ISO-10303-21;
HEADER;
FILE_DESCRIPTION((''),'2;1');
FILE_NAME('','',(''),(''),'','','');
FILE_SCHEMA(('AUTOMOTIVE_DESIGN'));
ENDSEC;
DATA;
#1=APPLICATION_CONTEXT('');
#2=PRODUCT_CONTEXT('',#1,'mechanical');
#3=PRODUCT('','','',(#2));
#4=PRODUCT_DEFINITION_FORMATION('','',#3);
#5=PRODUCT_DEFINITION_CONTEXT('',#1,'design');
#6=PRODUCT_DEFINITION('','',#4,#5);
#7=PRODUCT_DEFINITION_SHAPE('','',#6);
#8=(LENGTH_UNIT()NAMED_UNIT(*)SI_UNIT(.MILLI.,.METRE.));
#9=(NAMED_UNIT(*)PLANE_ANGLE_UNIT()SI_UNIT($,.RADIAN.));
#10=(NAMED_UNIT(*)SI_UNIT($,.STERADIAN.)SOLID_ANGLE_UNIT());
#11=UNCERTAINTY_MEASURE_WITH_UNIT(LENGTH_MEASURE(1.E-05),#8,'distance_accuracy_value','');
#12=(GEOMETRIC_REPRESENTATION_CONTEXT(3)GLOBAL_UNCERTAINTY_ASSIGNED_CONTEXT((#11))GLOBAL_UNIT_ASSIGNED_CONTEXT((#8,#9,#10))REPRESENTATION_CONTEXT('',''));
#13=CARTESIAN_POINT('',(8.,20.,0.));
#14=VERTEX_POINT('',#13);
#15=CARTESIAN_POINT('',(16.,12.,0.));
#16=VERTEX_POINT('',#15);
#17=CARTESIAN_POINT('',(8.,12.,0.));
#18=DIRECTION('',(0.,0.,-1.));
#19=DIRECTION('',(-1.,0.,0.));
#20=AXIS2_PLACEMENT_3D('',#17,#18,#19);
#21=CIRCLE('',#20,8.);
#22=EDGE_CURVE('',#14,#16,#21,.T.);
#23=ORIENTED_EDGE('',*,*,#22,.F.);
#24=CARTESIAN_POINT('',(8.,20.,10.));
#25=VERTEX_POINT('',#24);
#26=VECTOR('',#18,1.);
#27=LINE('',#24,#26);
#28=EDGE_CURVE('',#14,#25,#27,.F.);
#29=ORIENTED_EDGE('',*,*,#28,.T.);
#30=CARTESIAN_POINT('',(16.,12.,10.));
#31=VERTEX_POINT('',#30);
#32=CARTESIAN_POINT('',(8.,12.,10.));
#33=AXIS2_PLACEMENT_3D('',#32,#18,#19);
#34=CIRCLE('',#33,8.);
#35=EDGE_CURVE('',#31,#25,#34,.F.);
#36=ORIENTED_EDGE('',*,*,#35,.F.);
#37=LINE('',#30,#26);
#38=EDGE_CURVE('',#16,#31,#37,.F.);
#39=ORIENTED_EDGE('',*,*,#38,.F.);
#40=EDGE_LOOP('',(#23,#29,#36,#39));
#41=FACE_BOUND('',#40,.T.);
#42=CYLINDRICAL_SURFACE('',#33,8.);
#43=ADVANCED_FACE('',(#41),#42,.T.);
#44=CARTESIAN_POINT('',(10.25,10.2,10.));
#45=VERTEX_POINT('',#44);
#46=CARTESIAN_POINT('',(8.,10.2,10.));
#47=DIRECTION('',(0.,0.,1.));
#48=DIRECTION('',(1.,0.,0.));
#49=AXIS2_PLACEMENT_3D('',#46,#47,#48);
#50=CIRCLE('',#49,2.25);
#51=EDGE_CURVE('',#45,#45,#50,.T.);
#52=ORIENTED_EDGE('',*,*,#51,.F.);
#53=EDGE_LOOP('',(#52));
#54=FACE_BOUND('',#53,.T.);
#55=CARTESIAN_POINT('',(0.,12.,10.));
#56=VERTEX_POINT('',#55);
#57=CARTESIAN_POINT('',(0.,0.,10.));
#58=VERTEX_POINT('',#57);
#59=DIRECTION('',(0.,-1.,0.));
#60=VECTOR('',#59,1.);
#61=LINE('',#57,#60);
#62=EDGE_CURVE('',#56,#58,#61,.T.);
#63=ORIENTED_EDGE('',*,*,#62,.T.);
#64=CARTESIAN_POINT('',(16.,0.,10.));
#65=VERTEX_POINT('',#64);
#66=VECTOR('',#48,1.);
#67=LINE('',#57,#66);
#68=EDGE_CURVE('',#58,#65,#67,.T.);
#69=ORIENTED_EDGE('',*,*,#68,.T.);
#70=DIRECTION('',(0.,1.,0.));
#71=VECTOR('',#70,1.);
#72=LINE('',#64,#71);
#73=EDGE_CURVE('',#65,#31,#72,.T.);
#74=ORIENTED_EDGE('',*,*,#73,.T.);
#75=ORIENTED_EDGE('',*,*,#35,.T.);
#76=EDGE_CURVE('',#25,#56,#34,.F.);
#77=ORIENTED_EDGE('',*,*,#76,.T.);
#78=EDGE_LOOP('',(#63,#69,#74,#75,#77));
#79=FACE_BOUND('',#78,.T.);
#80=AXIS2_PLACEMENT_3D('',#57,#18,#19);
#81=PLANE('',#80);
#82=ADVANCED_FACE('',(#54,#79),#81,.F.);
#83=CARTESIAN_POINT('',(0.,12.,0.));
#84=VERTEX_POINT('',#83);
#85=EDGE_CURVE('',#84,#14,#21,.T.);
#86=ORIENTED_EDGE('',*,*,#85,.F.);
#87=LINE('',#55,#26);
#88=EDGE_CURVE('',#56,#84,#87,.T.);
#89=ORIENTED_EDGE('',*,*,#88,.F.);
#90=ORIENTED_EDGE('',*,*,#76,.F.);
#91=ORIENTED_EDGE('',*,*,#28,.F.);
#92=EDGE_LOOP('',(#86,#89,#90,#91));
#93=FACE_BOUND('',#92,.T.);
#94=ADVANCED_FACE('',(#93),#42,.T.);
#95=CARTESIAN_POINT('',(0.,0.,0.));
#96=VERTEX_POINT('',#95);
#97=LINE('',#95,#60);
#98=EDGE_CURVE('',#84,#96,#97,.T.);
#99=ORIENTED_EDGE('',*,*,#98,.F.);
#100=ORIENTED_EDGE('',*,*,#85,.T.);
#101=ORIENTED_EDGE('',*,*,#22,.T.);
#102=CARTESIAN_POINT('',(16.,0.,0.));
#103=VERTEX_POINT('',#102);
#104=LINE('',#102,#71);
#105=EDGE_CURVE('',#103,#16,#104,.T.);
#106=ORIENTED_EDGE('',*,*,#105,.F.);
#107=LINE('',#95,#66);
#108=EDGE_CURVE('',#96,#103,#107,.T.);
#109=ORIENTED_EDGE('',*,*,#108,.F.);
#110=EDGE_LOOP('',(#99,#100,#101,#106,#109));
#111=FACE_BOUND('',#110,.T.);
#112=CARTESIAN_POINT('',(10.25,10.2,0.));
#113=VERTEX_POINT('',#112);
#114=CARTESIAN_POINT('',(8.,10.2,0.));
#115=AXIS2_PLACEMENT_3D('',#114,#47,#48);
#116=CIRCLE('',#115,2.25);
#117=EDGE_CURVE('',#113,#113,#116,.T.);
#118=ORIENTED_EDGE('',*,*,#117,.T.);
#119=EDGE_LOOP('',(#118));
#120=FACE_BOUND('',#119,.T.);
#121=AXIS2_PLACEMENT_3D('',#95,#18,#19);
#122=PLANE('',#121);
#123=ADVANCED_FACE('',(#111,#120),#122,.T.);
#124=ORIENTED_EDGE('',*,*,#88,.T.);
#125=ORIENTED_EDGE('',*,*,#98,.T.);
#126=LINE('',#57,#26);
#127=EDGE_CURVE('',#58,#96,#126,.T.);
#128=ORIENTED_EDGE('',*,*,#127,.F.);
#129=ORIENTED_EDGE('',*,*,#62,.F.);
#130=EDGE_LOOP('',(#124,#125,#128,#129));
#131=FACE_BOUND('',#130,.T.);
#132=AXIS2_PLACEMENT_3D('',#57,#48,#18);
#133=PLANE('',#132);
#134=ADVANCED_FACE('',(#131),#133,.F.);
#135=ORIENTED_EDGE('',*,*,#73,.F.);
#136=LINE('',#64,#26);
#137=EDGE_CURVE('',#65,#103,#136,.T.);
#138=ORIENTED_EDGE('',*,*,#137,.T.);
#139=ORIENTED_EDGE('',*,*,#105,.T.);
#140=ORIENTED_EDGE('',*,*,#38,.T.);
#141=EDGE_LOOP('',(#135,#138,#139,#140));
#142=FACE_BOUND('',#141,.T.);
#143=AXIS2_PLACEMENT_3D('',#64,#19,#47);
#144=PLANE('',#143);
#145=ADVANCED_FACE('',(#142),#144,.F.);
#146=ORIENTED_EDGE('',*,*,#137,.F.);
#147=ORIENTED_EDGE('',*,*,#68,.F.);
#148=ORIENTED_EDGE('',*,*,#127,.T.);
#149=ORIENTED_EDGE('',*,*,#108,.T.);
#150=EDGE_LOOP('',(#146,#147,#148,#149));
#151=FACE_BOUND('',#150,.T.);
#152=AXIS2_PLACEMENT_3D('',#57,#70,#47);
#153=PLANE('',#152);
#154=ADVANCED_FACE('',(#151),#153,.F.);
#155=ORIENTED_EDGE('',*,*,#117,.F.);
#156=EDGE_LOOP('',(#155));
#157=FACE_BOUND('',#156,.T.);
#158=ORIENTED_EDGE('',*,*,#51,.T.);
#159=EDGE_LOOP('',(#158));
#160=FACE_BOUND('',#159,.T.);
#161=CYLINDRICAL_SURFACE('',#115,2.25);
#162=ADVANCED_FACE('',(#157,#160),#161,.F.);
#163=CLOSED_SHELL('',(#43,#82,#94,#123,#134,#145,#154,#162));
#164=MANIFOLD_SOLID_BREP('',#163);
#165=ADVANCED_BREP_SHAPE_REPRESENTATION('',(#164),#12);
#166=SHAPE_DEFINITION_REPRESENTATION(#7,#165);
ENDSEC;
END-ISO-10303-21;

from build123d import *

# Parameters (mm, degrees)
SKETCH1_W           = 16
SKETCH1_H           = 20
BOSS_EXTRUDE1_DEPTH = 10
SKETCH2_R           = 2.25
CUT_EXTRUDE1_DEPTH  = 28.49545417
FILLET1_R           = 8


with BuildPart() as part:
    # Sketch1 → Boss-Extrude1 (new body)
    with BuildSketch(Plane.XY):
        with Locations((8, 10)):
            Rectangle(SKETCH1_W, SKETCH1_H)
    extrude(amount=BOSS_EXTRUDE1_DEPTH)

    # Sketch2 → Cut-Extrude1 (cut, through all)
    with BuildSketch(Plane.XY.offset(10)):
        with Locations((8, 10.2)):
            Circle(SKETCH2_R)
    extrude(amount=-CUT_EXTRUDE1_DEPTH, mode=Mode.SUBTRACT)

    # Fillet1
    fillet1_edges = [part.edges().sort_by_distance(p)[0] for p in [
        (16, 20, 5),
        (0, 20, 5),
    ]]
    fillet(fillet1_edges, radius=FILLET1_R - 0.0001)  # a hair under: the kernel refuses the full size


solid = part.part
